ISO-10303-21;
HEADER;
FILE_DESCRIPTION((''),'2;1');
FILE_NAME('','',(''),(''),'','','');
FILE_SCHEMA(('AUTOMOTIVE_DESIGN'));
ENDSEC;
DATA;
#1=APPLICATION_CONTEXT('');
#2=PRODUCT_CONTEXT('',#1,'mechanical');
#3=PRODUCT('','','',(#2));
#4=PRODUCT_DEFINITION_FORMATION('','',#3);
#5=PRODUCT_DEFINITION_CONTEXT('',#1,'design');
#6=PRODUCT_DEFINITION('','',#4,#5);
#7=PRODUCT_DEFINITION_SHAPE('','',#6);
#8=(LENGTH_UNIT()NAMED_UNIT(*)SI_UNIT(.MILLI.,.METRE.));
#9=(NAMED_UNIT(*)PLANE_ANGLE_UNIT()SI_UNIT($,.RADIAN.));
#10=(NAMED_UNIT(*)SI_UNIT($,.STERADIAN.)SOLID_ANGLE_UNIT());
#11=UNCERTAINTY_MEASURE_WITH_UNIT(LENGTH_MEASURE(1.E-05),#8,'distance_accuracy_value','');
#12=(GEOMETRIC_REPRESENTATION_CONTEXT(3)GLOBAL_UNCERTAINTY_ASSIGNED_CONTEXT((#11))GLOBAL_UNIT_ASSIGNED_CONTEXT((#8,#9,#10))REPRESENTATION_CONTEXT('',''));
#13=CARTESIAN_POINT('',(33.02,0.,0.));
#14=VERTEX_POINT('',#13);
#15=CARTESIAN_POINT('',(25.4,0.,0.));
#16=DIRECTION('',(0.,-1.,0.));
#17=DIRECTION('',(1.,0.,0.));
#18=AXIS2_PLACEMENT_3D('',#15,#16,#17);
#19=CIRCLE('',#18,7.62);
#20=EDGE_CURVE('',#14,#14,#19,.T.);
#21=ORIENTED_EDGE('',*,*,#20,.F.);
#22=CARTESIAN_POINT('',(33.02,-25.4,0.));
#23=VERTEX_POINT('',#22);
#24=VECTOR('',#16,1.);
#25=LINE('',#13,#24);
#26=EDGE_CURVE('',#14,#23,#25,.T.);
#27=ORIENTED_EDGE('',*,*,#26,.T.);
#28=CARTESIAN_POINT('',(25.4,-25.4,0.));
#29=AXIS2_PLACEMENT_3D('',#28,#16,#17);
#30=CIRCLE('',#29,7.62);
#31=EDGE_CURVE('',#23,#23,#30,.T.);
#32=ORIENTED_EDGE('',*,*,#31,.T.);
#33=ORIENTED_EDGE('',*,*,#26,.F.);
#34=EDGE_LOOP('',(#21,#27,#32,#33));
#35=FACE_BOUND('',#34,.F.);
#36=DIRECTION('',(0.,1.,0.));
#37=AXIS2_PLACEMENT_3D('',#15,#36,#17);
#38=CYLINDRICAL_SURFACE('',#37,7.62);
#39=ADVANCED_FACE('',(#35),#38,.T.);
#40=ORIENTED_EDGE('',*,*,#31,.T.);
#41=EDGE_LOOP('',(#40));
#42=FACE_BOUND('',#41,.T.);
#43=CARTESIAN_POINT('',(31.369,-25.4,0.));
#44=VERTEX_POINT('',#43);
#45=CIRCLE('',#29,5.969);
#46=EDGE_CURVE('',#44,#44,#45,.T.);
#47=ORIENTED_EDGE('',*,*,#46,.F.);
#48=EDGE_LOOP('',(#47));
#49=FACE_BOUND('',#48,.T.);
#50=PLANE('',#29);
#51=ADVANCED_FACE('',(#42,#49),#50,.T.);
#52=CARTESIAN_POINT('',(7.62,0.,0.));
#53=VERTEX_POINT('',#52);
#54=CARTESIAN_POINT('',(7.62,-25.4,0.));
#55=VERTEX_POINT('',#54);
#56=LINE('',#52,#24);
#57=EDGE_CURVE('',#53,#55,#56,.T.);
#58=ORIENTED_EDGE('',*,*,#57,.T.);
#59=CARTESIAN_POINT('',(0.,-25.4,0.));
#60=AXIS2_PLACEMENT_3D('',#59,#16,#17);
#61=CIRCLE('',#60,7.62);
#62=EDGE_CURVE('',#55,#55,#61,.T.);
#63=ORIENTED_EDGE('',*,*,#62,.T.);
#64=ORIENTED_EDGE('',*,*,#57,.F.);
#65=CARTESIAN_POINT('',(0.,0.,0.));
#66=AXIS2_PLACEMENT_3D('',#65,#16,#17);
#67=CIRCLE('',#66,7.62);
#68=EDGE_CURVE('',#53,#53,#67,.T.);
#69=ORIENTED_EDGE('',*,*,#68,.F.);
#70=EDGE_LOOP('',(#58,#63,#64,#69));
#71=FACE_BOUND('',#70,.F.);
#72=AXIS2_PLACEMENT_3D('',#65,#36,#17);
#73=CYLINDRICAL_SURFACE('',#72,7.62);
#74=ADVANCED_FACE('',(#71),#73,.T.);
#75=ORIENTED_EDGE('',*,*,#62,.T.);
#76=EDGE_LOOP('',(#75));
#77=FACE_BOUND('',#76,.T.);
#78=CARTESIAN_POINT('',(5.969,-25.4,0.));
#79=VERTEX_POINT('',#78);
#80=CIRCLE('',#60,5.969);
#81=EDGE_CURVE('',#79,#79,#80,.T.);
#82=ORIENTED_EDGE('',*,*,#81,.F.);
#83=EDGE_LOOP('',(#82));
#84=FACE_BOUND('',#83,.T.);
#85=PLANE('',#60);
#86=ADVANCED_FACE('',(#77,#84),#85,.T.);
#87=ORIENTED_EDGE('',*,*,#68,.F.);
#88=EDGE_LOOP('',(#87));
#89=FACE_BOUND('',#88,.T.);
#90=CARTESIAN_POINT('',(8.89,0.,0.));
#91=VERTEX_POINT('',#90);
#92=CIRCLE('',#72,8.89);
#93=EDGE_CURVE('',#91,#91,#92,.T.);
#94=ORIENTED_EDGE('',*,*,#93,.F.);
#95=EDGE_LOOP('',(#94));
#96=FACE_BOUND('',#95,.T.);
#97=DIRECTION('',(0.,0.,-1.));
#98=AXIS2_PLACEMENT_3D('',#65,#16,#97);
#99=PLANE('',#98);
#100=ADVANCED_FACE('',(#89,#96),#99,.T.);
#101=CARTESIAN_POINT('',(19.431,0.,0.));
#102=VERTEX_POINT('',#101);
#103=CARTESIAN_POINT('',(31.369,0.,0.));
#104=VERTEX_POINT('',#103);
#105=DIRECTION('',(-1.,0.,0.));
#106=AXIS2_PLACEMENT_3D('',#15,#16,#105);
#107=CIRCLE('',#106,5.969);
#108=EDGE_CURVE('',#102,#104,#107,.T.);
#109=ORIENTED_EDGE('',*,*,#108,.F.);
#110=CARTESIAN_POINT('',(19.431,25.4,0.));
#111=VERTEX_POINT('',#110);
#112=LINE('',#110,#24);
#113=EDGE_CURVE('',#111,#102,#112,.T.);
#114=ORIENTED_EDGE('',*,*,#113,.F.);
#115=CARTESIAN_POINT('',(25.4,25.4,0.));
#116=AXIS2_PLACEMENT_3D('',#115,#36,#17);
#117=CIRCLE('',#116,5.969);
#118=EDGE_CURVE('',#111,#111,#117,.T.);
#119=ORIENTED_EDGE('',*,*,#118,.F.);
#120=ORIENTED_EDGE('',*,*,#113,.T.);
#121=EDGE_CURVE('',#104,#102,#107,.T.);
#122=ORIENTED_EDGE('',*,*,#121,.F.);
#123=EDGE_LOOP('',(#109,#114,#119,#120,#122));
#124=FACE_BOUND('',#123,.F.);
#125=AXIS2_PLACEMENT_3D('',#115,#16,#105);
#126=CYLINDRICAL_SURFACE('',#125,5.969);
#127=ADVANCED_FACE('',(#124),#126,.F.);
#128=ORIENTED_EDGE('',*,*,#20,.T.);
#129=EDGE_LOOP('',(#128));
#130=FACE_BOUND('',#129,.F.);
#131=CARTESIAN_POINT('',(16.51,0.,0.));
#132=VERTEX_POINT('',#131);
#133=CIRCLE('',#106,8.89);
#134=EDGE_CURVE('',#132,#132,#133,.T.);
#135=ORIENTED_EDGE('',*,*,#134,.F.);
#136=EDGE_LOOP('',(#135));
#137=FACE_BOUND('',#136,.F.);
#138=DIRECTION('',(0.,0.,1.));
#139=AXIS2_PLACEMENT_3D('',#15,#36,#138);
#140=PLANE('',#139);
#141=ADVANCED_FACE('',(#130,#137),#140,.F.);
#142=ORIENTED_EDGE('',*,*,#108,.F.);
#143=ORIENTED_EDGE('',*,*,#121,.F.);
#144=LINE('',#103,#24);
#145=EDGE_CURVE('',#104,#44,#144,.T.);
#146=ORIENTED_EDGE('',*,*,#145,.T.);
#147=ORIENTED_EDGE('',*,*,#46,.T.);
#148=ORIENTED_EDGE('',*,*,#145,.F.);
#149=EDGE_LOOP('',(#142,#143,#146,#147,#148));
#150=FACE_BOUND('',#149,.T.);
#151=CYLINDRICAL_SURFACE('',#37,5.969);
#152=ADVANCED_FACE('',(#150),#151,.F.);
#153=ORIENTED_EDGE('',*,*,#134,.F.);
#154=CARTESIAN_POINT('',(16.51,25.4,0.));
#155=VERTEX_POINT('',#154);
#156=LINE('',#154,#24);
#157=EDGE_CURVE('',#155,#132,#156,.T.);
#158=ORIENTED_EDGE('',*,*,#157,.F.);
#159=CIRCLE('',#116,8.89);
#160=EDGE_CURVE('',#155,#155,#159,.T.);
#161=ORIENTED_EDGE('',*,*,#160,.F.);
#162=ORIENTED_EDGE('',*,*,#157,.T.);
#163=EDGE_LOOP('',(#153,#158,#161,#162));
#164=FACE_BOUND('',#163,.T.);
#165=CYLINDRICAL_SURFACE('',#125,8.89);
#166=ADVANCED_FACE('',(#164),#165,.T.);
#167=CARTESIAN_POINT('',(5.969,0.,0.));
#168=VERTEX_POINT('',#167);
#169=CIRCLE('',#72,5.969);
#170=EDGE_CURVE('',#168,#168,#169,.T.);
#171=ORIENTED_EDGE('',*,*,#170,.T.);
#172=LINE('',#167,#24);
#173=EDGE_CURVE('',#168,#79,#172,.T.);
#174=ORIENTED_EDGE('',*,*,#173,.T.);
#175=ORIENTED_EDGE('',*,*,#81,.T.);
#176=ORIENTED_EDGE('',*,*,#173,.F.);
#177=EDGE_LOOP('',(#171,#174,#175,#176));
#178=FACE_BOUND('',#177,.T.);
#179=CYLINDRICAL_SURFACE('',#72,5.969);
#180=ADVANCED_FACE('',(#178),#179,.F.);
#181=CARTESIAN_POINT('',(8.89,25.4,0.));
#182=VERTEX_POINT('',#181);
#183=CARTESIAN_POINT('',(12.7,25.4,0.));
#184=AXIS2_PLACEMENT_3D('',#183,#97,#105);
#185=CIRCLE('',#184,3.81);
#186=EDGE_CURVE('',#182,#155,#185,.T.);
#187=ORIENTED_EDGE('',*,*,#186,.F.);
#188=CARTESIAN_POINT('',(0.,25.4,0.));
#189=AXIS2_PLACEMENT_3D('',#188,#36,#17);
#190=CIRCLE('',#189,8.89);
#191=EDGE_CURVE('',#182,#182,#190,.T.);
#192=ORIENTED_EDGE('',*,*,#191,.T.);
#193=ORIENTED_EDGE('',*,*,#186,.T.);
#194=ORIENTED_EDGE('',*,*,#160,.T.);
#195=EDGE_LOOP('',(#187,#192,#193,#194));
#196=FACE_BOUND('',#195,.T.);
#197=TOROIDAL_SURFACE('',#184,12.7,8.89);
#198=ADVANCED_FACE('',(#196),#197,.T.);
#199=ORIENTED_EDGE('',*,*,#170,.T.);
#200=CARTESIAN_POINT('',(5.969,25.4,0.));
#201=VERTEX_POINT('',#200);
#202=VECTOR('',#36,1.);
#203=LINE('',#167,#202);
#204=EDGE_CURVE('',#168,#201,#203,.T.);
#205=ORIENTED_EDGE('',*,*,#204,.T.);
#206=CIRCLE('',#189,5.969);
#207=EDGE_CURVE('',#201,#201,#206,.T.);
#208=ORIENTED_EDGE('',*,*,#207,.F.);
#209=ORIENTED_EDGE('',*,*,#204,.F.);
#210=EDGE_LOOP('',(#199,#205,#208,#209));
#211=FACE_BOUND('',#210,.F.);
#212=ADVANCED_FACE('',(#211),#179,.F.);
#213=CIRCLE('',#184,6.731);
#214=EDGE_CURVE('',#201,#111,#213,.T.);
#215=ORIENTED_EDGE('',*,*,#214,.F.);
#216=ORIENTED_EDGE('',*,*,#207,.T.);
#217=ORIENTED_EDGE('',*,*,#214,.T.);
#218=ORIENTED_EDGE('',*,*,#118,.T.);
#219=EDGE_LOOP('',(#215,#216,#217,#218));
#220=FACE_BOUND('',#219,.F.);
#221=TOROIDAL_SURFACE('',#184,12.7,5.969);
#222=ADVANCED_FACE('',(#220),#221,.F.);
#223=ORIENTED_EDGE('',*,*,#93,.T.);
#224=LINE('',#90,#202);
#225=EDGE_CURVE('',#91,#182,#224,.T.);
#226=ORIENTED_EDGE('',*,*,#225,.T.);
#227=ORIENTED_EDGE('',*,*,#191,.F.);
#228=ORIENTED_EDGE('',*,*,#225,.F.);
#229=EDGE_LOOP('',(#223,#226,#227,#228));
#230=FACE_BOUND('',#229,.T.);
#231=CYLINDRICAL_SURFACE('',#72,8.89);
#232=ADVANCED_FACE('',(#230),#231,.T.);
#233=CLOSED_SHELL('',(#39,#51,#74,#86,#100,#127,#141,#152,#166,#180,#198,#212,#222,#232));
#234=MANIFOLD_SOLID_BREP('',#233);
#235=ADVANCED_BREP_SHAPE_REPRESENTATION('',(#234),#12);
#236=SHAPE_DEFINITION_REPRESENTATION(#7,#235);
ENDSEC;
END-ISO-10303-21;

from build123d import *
from build123d import SkipClean  # not in build123d's __all__

# Parameters (mm, degrees)
F0_R     = 8.89
F0_R_2   = 5.969
F3_R     = 7.62
F3_R_2   = 5.969
F4_R     = 7.62
F4_R_2   = 5.969
F5_DEPTH = 25.4


with BuildPart() as f2:
    # F2: sweep along a path in F1
    with BuildLine(Plane.XY) as f2_path:
        Line((0, 0), (0, 25.4))
        ThreePointArc((0, 25.4), (12.7, 38.1), (25.4, 25.4))
        Line((25.4, 25.4), (25.4, 0))
    # F0 (on Front) → F2 (sweep)
    with BuildSketch(Plane.XZ):
        Circle(F0_R)
        Circle(F0_R_2, mode=Mode.SUBTRACT)
    sweep(path=f2_path.line)

    # F3 (on face) + F4 (on face) → F5 (join)
    with BuildSketch(Plane.XZ):
        Circle(F3_R)
        Circle(F3_R_2, mode=Mode.SUBTRACT)
    with BuildSketch(Plane.XZ):
        with Locations((25.4, 0)):
            Circle(F4_R)
        with Locations((25.4, 0)):
            Circle(F4_R_2, mode=Mode.SUBTRACT)
    with SkipClean():  # cleaning this boolean's faces spoils the solid; the shape is the same uncleaned
        extrude(amount=F5_DEPTH)


solid = f2.part
